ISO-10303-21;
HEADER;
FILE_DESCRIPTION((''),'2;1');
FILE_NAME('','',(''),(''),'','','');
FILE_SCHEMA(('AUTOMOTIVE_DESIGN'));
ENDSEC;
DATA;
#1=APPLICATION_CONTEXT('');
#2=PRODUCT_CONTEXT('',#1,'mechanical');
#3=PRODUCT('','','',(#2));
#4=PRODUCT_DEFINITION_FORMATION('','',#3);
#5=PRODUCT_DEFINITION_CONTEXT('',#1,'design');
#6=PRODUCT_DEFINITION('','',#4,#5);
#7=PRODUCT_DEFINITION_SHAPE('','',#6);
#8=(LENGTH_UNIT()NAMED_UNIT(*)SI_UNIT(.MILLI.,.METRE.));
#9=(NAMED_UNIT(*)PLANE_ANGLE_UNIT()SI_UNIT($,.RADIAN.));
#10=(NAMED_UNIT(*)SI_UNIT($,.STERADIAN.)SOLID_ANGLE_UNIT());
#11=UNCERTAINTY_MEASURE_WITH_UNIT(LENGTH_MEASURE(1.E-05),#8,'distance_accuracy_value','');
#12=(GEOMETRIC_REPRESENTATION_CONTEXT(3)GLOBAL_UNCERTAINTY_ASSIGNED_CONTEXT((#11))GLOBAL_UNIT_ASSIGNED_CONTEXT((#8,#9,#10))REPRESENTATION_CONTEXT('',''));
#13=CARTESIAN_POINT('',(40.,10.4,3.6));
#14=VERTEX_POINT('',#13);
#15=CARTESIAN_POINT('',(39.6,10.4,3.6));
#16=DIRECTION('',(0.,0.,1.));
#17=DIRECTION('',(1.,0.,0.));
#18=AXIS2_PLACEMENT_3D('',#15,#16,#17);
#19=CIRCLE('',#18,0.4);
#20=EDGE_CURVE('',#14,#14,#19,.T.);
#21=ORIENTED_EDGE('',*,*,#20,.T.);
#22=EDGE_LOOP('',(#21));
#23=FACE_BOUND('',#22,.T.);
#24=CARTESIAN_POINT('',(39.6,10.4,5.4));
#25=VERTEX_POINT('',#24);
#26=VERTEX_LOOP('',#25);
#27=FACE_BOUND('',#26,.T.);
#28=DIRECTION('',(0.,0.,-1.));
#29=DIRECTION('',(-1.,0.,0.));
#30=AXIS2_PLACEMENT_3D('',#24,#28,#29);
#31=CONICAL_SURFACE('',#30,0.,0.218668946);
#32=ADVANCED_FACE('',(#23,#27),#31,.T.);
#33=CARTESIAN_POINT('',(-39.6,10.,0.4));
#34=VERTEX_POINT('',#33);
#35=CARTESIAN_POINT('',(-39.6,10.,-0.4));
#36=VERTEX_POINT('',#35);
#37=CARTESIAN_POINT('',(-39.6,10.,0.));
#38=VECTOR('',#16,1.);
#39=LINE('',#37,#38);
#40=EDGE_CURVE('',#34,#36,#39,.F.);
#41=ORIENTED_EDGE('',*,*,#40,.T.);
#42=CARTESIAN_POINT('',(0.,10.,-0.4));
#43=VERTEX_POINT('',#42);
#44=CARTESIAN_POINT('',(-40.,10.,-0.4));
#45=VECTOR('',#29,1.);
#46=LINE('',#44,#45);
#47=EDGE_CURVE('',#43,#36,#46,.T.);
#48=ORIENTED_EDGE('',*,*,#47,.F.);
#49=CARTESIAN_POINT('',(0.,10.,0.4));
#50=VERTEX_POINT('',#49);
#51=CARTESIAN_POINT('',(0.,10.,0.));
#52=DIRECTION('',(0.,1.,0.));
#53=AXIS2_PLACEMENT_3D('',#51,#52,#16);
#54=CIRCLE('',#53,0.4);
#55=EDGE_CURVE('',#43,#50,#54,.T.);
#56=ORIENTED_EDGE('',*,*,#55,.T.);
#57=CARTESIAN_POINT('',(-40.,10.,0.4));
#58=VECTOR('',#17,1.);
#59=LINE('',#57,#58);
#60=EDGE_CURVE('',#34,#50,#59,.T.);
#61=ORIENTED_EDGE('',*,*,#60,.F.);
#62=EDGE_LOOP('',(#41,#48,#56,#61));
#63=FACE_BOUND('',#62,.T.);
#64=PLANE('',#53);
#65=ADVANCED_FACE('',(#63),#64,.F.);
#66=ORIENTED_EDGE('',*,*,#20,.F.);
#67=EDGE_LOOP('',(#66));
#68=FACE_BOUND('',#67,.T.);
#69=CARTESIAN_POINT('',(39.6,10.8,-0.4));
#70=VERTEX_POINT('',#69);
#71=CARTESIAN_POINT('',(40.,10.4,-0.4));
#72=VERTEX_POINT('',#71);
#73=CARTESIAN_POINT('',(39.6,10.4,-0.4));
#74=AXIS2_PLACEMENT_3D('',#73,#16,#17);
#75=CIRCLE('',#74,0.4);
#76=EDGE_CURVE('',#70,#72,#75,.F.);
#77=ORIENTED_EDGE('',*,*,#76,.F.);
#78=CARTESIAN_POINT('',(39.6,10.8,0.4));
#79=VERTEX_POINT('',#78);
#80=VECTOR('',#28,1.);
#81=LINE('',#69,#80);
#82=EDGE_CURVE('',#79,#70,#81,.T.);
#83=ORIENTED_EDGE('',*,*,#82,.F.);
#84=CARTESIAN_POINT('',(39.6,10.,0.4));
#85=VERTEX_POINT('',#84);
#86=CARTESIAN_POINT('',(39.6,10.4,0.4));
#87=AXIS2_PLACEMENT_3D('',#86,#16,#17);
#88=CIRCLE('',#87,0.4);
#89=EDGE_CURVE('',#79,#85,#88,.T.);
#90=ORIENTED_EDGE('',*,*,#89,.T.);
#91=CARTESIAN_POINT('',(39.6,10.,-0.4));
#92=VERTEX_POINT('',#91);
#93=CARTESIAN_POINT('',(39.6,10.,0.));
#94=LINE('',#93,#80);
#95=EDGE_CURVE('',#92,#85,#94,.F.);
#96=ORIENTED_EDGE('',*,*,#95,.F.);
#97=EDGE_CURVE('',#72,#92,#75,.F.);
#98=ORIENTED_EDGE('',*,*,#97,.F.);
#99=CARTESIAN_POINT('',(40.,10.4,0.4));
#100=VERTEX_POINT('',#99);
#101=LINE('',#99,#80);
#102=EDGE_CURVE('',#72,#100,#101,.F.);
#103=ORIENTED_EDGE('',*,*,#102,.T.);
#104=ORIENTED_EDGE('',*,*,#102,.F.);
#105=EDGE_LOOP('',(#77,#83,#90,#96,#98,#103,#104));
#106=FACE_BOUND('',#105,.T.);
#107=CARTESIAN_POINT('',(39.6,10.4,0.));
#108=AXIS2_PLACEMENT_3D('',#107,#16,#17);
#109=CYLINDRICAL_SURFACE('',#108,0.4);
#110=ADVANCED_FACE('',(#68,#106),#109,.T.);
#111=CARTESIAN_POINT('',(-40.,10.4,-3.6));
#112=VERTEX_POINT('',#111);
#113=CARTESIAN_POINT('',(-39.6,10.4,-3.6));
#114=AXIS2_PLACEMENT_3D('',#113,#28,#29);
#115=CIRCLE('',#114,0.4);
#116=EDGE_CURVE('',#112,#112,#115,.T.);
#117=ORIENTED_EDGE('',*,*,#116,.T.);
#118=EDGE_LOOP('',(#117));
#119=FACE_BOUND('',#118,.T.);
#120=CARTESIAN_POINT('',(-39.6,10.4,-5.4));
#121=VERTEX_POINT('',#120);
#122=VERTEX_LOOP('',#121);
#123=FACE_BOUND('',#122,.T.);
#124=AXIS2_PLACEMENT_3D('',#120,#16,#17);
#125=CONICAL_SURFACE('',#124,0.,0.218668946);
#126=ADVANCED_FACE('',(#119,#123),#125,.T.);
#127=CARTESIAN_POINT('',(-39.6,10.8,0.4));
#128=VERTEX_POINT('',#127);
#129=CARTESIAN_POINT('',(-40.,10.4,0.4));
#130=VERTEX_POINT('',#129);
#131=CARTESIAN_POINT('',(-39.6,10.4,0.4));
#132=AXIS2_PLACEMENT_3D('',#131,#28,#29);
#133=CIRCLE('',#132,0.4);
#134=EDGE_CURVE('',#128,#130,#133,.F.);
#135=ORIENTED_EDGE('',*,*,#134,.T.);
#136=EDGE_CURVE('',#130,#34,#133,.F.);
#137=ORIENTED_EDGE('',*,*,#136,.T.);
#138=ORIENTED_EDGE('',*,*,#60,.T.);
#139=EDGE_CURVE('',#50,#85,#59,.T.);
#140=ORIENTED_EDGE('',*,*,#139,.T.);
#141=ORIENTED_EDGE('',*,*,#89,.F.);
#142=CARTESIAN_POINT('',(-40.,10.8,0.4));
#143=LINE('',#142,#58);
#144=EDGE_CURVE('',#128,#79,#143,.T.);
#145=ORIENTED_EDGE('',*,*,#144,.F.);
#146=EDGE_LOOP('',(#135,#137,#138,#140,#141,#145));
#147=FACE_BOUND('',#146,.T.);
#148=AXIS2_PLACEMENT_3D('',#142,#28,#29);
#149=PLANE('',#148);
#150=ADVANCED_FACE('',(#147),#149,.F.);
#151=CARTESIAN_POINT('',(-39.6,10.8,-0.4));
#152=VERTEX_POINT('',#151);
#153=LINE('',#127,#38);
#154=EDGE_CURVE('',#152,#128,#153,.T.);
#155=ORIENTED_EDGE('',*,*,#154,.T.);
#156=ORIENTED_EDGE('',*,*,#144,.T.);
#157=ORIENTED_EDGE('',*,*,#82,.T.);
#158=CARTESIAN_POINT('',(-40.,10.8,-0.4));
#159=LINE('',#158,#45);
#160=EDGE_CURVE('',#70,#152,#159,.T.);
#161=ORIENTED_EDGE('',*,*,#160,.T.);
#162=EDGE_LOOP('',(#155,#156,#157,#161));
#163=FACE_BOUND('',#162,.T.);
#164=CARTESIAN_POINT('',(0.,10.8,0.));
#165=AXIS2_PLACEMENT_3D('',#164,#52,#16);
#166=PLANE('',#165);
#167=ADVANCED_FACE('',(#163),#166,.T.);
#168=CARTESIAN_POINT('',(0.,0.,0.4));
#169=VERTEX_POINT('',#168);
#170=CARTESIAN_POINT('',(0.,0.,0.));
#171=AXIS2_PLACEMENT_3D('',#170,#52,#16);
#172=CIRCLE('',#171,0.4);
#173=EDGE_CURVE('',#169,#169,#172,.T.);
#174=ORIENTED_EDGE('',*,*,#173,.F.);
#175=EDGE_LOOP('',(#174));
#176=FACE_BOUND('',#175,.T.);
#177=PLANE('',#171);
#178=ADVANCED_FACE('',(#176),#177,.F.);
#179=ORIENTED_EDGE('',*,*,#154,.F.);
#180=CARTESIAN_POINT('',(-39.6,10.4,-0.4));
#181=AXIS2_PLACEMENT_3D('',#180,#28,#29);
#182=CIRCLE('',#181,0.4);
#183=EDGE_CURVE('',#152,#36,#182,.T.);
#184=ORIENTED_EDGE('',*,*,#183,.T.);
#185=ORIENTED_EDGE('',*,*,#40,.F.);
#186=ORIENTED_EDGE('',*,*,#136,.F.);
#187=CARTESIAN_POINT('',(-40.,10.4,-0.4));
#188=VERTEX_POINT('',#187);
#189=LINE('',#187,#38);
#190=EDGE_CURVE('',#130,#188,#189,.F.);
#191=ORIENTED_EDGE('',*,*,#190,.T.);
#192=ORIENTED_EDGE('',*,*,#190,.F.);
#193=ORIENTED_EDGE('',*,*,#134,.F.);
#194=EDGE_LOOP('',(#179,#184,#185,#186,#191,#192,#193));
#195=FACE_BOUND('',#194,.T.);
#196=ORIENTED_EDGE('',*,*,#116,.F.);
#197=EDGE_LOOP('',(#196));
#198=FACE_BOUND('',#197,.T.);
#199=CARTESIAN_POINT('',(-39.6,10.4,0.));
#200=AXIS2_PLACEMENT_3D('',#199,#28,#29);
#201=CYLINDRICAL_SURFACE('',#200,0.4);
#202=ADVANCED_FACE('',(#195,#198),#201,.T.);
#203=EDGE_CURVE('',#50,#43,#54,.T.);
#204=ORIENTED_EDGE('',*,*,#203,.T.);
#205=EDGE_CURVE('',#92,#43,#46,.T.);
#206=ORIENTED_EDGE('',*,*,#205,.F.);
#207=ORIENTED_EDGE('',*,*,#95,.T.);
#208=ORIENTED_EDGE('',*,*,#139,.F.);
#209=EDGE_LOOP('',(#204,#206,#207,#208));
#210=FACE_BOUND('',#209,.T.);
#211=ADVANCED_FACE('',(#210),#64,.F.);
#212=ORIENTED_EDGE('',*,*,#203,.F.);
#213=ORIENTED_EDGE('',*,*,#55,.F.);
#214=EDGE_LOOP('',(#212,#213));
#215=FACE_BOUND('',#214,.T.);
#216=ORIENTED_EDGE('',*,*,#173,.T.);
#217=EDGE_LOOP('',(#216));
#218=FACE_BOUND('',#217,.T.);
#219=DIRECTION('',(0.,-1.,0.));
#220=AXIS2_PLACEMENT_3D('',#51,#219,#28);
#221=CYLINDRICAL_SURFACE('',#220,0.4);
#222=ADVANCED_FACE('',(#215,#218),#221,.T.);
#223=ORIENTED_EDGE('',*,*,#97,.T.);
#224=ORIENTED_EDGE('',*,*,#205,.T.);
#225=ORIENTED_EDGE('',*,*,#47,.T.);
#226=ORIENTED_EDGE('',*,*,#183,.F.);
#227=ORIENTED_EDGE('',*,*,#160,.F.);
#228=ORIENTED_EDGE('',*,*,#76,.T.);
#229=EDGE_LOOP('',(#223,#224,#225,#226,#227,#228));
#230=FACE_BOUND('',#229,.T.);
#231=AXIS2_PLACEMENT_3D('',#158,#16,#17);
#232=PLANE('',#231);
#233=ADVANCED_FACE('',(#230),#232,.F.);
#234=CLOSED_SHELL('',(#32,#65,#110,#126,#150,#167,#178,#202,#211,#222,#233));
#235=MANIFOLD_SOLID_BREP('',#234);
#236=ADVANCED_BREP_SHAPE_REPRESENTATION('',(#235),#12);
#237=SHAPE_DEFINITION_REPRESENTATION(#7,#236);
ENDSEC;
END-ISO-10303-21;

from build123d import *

# Parameters (mm, degrees)
SKETCH_1_R      = 0.4
EXTRUDE_1_DEPTH = 10
SKETCH_2_W      = 80
SKETCH_2_H      = 0.8
EXTRUDE_2_DEPTH = 0.8
FILLET_1_R      = 0.4
SKETCH_3_R      = 0.4
EXTRUDE_3_DEPTH = 3.2
SKETCH_4_R      = 0.4
EXTRUDE_4_DEPTH = 3.2


with BuildPart() as part:
    # 草图1 → 凸台-拉伸1 (new body)
    with BuildSketch(Plane(origin=(0, 0, 0), x_dir=(1, 0, 0), z_dir=(0, 1, 0))):
        with Locations(Location((0, 0, 0), (0, 0, 270))):
            Circle(SKETCH_1_R)
    extrude(amount=EXTRUDE_1_DEPTH)

    # 草图2 → 凸台-拉伸2 (add)
    with BuildSketch(Plane(origin=(0, 10, 0), x_dir=(1, 0, 0), z_dir=(0, 1, 0))):
        Rectangle(SKETCH_2_W, SKETCH_2_H)
    extrude(amount=EXTRUDE_2_DEPTH)

    # 圆角1
    fillet_1_edges = [part.edges().sort_by_distance(p)[0] for p in [
        (40, 10, 0),
        (40, 10.8, 0),
        (-40, 10, 0),
        (-40, 10.8, 0),
    ]]
    fillet(fillet_1_edges, radius=FILLET_1_R - 0.0001)  # a hair under: the kernel refuses the full size

    # 草图3 → 凸台-拉伸3 (add)
    with BuildSketch(Plane.XY.offset(0.4)):
        with Locations((39.6, 10.4)):
            Circle(SKETCH_3_R)
    extrude(amount=EXTRUDE_3_DEPTH)

    # 草图4 → 凸台-拉伸4 (add)
    with BuildSketch(Plane(origin=(0, 0, -0.4), x_dir=(-1, 0, 0), z_dir=(0, 0, -1))):
        with Locations((39.6, 10.4)):
            Circle(SKETCH_4_R)
    extrude(amount=EXTRUDE_4_DEPTH)

    # 草图5 → 旋转1 (revolve)
    with BuildSketch(Plane(origin=(0, 10.4, 0), x_dir=(1, 0, 0), z_dir=(0, 1, 0))):
        Polygon((39.6, -3.6), (39.6, -5.4), (40, -3.6), align=None)
    revolve(axis=Axis((39.6, 10.4, 3.6), (0, 0, 1)))

    # 草图6 → 旋转2 (revolve)
    with BuildSketch(Plane(origin=(0, 10.4, 0), x_dir=(1, 0, 0), z_dir=(0, 1, 0))):
        Polygon((-39.6, 3.6), (-39.6, 5.4), (-40, 3.6), align=None)
    revolve(axis=Axis((-39.6, 10.4, -3.6), (0, 0, -1)))


solid = part.part
